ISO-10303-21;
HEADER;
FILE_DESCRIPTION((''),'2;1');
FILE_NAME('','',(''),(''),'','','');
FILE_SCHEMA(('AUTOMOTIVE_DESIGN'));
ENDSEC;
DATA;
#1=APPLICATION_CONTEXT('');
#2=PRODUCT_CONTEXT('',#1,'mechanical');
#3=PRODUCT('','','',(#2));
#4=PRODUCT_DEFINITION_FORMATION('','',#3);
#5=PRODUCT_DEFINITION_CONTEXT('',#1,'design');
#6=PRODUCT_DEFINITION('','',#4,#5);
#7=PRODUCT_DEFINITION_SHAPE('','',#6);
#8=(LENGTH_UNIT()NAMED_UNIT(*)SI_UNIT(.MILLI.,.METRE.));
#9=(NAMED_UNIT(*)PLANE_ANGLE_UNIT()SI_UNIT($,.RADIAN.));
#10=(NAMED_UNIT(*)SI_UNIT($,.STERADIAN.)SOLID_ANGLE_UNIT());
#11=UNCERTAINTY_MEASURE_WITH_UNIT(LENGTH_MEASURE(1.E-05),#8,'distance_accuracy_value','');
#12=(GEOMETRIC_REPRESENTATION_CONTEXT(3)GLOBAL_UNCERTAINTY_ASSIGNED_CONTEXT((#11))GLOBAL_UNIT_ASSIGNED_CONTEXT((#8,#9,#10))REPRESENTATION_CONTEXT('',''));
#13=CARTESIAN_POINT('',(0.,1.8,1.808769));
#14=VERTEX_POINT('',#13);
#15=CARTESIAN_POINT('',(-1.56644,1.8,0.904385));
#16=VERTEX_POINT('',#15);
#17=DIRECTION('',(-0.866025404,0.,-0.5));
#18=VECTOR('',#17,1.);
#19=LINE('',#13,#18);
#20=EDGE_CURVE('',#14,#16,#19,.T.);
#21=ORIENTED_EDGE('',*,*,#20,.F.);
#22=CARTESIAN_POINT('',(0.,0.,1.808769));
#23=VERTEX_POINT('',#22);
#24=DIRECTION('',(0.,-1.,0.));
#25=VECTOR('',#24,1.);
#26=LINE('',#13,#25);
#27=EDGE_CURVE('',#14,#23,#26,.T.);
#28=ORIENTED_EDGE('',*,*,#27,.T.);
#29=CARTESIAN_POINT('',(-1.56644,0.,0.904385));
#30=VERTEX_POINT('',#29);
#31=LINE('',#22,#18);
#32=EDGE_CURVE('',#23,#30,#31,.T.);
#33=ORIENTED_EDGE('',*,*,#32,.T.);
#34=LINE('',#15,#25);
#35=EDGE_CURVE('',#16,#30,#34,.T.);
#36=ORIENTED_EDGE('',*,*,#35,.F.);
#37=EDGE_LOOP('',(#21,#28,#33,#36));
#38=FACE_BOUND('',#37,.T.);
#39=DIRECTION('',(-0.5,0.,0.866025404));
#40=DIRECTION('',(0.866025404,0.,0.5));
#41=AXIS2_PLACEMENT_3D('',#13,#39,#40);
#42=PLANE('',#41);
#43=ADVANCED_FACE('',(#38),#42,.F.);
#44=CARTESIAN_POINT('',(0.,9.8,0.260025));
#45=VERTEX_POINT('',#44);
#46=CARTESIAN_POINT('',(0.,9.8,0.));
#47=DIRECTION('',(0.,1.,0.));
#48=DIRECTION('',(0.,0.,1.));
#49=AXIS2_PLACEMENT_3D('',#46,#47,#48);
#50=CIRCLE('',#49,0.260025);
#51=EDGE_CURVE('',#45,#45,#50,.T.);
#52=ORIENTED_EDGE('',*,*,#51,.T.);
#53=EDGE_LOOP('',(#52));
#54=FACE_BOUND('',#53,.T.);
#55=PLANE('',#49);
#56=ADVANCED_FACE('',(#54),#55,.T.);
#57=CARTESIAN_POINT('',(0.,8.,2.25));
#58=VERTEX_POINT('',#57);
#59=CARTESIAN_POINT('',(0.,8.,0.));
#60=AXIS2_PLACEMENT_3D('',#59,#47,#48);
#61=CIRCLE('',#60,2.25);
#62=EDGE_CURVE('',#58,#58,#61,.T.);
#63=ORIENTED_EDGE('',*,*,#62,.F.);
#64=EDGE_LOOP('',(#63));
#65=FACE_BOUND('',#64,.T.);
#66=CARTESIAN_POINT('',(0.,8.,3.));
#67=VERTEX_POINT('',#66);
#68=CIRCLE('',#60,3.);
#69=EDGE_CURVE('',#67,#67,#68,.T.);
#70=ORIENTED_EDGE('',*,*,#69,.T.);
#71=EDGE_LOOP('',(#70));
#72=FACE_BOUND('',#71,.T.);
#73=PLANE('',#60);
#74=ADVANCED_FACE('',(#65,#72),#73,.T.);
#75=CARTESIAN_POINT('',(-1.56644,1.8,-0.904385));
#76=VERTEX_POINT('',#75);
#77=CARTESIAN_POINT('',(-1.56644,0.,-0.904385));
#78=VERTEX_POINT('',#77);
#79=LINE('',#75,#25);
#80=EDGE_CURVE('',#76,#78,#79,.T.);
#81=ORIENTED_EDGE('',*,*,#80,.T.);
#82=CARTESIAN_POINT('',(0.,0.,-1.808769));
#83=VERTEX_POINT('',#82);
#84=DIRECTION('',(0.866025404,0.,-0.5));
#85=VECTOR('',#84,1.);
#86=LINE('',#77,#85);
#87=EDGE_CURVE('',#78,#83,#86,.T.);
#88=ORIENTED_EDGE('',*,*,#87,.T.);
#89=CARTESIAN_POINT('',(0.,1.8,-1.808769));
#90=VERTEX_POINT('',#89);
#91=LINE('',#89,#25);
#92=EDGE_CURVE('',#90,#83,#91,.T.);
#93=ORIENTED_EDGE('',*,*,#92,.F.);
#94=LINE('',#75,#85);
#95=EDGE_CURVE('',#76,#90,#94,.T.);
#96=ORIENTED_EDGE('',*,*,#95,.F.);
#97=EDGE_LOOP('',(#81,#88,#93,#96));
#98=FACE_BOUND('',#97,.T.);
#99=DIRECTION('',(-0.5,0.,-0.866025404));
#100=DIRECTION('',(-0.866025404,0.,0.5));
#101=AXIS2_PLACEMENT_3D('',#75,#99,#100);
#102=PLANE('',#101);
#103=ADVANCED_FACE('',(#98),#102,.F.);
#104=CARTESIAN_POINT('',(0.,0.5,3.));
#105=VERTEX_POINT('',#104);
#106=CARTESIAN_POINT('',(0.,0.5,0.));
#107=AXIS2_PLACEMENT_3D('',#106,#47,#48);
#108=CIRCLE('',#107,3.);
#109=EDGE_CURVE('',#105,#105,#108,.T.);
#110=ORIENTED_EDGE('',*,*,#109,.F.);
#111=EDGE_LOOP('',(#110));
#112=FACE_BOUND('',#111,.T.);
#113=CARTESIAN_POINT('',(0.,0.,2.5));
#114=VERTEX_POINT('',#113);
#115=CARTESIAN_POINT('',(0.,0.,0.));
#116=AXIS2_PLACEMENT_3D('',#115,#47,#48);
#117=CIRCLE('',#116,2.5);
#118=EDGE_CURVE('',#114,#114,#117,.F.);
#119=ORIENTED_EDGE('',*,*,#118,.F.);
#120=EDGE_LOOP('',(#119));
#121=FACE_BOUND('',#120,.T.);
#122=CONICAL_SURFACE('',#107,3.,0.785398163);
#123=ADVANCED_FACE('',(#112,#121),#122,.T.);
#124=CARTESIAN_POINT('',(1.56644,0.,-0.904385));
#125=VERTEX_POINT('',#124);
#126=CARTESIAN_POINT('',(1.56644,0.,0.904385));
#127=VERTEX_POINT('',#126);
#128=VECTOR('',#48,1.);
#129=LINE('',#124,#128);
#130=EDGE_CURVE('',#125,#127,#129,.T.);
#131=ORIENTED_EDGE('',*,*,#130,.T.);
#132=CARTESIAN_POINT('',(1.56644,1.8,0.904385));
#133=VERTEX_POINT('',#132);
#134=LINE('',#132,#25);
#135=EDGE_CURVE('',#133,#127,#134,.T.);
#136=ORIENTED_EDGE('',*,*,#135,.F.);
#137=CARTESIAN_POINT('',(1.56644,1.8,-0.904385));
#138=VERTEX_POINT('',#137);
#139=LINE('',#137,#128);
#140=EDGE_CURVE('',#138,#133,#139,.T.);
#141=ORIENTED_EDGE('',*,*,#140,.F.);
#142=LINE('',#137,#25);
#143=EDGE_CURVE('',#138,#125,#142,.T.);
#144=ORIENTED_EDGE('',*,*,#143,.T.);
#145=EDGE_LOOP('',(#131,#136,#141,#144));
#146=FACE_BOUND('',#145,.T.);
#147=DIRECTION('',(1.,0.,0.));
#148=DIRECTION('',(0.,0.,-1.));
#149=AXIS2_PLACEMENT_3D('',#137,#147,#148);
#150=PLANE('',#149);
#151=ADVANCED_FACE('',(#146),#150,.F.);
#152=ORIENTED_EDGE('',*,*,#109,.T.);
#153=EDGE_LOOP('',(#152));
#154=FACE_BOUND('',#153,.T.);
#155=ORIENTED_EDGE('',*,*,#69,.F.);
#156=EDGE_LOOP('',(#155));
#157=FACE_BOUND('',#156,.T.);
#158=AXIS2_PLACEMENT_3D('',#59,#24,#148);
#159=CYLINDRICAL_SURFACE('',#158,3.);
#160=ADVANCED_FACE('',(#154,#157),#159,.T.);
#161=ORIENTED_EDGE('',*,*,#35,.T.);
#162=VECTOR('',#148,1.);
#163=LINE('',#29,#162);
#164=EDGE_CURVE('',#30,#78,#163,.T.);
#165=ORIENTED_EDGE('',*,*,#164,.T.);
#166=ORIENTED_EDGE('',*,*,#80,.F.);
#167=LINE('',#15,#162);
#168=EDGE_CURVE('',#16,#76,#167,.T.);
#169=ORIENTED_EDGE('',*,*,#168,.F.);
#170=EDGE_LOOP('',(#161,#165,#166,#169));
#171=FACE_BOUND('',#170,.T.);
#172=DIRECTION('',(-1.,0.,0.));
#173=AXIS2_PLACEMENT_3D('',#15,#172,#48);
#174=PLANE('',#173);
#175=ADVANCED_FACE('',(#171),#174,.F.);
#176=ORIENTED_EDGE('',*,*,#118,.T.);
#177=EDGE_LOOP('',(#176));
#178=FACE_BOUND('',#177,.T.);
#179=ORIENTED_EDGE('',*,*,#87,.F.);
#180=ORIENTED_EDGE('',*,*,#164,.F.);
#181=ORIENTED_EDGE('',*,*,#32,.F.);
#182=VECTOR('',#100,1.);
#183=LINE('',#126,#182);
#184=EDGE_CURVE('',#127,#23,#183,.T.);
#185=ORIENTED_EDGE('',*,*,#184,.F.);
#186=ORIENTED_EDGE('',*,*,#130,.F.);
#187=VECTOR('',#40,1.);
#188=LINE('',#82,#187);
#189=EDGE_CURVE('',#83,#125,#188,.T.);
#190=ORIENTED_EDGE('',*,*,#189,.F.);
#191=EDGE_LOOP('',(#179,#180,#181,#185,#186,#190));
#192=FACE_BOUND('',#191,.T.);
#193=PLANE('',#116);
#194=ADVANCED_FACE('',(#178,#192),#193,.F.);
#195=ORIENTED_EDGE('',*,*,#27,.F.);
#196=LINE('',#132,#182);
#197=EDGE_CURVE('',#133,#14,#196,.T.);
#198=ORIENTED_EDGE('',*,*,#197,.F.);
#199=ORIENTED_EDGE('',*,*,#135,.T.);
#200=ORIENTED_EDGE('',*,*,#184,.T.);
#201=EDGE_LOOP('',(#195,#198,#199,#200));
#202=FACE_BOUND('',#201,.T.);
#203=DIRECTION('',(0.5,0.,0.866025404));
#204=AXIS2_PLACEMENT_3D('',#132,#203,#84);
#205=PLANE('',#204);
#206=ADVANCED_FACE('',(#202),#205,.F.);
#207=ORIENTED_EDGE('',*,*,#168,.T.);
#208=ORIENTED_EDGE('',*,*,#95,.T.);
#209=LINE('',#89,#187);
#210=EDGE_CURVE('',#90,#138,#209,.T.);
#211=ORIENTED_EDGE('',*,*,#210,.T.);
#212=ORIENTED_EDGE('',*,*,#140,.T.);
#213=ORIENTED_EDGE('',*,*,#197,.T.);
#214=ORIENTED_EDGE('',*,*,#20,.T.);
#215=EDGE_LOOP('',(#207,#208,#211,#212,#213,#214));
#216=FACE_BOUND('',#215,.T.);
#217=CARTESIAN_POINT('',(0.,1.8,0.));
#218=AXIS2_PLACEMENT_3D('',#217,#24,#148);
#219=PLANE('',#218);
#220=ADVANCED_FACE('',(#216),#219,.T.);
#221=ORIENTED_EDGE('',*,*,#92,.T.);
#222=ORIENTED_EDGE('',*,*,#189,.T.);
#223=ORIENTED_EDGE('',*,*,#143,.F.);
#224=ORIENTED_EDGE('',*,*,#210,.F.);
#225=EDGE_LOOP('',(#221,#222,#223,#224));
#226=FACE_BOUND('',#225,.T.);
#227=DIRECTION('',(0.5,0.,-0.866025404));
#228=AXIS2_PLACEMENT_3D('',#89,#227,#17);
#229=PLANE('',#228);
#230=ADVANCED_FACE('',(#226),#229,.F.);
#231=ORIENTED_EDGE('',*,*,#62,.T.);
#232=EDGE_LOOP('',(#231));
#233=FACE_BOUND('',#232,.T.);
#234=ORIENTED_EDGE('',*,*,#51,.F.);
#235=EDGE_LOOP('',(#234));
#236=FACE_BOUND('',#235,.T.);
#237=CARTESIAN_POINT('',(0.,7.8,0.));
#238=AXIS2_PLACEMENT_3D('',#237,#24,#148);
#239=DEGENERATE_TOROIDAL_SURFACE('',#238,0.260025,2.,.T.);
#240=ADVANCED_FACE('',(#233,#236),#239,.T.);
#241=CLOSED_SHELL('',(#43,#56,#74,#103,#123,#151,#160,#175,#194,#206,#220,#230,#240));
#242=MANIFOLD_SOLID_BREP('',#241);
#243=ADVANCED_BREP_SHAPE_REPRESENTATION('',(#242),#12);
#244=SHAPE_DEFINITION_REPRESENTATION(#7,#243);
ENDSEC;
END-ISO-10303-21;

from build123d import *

# Parameters (mm, degrees)
SKETCH_1_R          = 3
EXTRUDE_1_DEPTH     = 8
SKETCH_2_R          = 2.25
EXTRUDE_2_DEPTH     = 1.8
FILLET_2_R          = 2
CHAMFER_1_SIZE      = 0.5
CUT_EXTRUDE_1_DEPTH = 1.8


with BuildPart() as part:
    # 草图1 → 凸台-拉伸1 (new body)
    with BuildSketch(Plane(origin=(0, 0, 0), x_dir=(1, 0, 0), z_dir=(0, 1, 0))):
        with Locations(Location((0, 0, 0), (0, 0, 270))):
            Circle(SKETCH_1_R)
    extrude(amount=EXTRUDE_1_DEPTH)

    # 草图2 → 凸台-拉伸2 (add)
    with BuildSketch(Plane(origin=(0, 8, 0), x_dir=(1, 0, 0), z_dir=(0, 1, 0))):
        with Locations(Location((0, 0, 0), (0, 0, 270))):
            Circle(SKETCH_2_R)
    extrude(amount=EXTRUDE_2_DEPTH)

    # 圆角2
    # the kernel refuses this fillet: 2 mm, written as the material it takes off along each edge
    with BuildSketch(Plane(origin=(0, 9.8, 0), x_dir=(0, 0, 1), z_dir=(-1, 0, 0))) as fillet_2_piece_1:
        with BuildLine():
            CenterArc((0.260025126, -2), FILLET_2_R, 5.739170477, 84.260829523)
            Line((0.260025126, 0), (0.260025126, 0.04))
            Line((0.260025126, 0.04), (2.25, 0.04))
            Line((2.25, 0.04), (2.29, 0))
            ThreePointArc((2.29, 0), (2.29, -0.9), (2.289799497, -1.796))
            Line((2.289799497, -1.796), (2.25, -1.8))
        make_face()
    revolve(axis=Axis((0, 9.8, 0), (0, 1, 0)), mode=Mode.SUBTRACT)

    # 倒角1
    chamfer_1_edges = [part.edges().sort_by_distance(p)[0] for p in [
        (0, 0, -3),
    ]]
    chamfer(chamfer_1_edges, length=CHAMFER_1_SIZE)

    # 草图3 → 切除-拉伸1 (cut)
    with BuildSketch(Plane.XZ):
        Polygon((0, 1.808769012), (-1.566439914, 0.904384506), (-1.566439914, -0.904384506), (0, -1.808769012), (1.566439914, -0.904384506), (1.566439914, 0.904384506), align=None)
    extrude(amount=-CUT_EXTRUDE_1_DEPTH, mode=Mode.SUBTRACT)


solid = part.part
